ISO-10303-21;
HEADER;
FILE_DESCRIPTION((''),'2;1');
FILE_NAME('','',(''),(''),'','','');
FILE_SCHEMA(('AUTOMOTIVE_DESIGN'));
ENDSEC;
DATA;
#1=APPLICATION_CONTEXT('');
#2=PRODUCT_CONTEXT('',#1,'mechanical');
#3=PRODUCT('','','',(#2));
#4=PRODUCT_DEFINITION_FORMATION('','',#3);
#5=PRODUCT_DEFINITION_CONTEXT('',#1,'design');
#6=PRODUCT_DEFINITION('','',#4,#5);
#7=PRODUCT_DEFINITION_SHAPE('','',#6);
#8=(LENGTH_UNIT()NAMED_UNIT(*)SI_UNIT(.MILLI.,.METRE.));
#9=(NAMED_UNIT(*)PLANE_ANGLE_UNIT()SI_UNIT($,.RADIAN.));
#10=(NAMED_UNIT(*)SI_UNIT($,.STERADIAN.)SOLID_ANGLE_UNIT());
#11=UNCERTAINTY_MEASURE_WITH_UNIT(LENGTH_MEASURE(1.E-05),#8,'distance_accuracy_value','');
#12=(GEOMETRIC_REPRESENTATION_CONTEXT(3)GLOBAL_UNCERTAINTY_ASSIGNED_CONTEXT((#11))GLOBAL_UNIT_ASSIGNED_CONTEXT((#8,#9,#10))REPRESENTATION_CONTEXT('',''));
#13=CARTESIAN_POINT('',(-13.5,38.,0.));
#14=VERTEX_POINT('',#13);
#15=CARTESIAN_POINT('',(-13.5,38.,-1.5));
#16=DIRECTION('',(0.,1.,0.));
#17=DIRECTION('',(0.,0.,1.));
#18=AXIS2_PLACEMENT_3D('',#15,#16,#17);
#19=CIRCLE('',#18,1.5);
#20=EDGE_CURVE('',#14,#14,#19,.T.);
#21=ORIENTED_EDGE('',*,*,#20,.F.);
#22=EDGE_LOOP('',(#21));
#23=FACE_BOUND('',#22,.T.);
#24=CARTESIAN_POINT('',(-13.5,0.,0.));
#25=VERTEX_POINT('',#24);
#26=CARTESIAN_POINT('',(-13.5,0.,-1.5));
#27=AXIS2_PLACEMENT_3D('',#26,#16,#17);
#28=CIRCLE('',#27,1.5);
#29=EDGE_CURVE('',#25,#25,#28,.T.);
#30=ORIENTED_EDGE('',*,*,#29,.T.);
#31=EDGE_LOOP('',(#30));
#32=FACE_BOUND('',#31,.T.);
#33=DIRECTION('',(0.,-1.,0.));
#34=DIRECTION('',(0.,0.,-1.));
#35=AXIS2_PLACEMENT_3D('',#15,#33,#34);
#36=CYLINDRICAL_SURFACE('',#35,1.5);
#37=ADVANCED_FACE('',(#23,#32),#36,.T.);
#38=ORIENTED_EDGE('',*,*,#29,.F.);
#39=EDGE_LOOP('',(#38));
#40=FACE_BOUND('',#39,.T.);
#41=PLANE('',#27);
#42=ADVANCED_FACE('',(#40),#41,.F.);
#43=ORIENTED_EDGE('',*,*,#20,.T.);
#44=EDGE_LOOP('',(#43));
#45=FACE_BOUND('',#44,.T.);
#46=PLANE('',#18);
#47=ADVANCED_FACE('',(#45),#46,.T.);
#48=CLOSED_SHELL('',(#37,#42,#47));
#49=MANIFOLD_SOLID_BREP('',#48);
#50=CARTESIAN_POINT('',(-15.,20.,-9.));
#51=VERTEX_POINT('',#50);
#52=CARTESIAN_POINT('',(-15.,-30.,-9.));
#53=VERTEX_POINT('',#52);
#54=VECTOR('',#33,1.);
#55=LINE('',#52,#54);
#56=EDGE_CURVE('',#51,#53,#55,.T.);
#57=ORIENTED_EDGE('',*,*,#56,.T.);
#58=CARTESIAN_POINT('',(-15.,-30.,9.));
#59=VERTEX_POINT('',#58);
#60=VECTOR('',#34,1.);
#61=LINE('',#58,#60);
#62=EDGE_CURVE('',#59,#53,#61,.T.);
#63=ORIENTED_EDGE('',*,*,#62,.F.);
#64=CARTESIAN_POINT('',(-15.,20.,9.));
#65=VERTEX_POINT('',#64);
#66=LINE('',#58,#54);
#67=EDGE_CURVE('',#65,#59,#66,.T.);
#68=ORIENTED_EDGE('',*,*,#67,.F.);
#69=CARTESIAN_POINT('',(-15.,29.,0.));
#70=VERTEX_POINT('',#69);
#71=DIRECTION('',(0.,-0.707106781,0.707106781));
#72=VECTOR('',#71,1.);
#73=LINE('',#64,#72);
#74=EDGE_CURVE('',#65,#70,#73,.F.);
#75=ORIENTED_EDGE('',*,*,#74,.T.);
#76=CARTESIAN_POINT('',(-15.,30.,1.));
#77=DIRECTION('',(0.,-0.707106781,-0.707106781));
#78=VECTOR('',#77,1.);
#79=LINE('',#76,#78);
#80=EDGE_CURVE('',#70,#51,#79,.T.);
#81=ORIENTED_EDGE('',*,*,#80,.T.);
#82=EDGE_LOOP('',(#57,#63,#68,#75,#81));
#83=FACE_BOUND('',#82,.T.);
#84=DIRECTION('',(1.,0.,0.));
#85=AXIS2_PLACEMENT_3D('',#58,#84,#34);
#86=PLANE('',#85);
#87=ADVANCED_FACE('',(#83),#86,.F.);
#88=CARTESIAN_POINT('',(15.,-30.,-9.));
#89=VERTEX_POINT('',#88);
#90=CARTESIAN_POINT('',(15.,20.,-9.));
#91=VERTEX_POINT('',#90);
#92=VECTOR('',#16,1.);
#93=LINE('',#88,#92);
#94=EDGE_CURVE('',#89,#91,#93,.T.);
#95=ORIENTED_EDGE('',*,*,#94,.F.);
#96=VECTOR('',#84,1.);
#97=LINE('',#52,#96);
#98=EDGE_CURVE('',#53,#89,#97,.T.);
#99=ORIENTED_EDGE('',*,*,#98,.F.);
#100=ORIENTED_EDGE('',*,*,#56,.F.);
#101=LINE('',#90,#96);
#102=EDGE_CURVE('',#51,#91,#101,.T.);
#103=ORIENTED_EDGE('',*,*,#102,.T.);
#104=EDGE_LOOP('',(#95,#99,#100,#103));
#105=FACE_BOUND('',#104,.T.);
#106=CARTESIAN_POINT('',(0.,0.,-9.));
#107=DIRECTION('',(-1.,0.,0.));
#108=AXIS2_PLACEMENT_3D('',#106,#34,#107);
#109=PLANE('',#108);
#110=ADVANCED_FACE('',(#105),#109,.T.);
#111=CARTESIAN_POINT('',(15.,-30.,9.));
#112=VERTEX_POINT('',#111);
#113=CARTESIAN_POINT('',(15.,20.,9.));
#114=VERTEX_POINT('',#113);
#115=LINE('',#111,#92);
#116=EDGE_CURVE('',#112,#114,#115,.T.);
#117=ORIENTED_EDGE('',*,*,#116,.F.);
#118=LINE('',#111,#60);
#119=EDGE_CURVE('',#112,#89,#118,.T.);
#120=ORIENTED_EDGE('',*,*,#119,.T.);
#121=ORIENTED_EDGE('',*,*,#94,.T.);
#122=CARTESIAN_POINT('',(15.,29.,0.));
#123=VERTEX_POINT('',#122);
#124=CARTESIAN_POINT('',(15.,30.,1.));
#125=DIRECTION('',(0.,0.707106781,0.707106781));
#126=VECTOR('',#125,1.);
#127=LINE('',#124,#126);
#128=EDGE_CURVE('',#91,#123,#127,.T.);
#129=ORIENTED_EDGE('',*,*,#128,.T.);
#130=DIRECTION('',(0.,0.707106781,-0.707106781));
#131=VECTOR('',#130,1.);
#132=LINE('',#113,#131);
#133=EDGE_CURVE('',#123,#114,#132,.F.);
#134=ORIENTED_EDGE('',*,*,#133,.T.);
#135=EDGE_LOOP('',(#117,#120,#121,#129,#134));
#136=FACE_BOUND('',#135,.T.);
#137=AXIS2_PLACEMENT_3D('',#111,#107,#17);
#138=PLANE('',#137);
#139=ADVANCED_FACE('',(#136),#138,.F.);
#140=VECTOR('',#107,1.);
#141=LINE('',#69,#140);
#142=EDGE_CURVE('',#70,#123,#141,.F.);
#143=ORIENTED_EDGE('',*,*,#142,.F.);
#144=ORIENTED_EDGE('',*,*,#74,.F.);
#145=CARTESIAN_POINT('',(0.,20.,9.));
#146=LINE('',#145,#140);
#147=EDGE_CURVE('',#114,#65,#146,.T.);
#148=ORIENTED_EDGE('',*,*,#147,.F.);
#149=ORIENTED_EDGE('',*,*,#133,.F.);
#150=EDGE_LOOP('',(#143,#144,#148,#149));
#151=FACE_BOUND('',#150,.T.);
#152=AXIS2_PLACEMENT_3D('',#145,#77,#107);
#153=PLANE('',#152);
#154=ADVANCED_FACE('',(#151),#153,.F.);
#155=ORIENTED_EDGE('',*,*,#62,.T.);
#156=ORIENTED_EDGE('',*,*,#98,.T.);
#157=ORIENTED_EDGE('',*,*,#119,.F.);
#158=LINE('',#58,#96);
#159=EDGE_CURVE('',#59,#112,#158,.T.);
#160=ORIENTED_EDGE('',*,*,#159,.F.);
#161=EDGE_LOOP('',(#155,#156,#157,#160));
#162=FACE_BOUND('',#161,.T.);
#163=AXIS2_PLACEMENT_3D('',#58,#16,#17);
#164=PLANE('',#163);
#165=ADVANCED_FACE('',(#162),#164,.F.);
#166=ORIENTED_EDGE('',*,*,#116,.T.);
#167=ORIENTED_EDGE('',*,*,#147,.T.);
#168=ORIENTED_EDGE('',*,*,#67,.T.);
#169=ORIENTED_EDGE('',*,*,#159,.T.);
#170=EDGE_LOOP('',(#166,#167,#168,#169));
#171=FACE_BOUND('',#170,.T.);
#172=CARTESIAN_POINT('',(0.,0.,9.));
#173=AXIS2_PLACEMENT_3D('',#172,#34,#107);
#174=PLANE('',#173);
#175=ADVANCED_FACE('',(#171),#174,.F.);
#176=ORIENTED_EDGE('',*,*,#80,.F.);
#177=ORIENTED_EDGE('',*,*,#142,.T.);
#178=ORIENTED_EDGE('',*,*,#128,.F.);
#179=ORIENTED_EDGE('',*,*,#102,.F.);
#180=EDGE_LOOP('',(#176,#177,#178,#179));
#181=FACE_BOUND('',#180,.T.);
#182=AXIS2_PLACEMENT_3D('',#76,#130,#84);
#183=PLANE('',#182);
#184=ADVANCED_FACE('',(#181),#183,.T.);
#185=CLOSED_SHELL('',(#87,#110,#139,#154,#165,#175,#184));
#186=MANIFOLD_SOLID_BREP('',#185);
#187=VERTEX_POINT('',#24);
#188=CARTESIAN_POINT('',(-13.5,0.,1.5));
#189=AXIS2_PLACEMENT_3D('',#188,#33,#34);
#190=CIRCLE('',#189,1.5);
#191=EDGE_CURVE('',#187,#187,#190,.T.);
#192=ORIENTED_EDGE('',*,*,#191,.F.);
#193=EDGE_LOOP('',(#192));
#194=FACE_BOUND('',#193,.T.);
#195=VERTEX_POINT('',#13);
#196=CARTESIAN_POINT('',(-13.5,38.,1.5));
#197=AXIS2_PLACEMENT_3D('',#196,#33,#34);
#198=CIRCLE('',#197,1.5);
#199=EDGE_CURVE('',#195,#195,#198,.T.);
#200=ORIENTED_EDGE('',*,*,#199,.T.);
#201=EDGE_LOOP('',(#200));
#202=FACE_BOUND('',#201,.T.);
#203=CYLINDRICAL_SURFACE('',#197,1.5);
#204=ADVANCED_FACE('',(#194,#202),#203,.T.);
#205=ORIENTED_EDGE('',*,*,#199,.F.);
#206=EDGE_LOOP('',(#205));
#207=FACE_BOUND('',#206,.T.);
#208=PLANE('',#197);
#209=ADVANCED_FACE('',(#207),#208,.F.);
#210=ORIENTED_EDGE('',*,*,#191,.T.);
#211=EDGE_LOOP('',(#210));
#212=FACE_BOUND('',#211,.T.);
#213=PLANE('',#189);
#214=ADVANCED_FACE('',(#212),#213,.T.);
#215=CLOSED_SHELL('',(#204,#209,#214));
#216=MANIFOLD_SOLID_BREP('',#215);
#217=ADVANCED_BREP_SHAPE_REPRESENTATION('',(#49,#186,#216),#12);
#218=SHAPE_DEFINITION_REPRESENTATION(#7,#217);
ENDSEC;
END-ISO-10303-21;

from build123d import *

# Parameters (mm, degrees)
CROQUIS1_W                = 30
CROQUIS1_H                = 60
SALIENTE_EXTRUIR1_DEPTH   = 9
CHAFL_N1_SIZE             = 10
CROQUIS2_R                = 1.5
SALIENTE_EXTRUIR4_DEPTH   = 38
SALIENTE_EXTRUIR4_2_DEPTH = 38


with BuildPart() as part:
    # Croquis1 → Saliente-Extruir1 (new, symmetric)
    with BuildSketch(Plane.XY):
        Rectangle(CROQUIS1_W, CROQUIS1_H)
    extrude(amount=SALIENTE_EXTRUIR1_DEPTH, both=True)

    # Chaflán1
    # the kernel refuses this chamfer: 10 mm, written as the material it takes off along each edge
    with BuildSketch(Plane(origin=(40.71682988, 30, -9), x_dir=(0, 0.027495876610586317, 0.9996219169112968), z_dir=(-1, 0, 0))) as chafl_n1_piece_1:
        Polygon((CHAFL_N1_SIZE * 0.999621916911, -CHAFL_N1_SIZE * 0.0274958766106), (-CHAFL_N1_SIZE * 0.0274958766106, -CHAFL_N1_SIZE * 0.999621916911), (0, 0), align=None)
    extrude(amount=81.433659759, mode=Mode.SUBTRACT)
    with BuildSketch(Plane(origin=(40.71682988, 30, 9), x_dir=(0, 0.027495876610586317, -0.9996219169112968), z_dir=(-1, 0, 0))) as chafl_n1_piece_2:
        Polygon((CHAFL_N1_SIZE * 0.999621916911, CHAFL_N1_SIZE * 0.0274958766106), (-CHAFL_N1_SIZE * 0.0274958766106, CHAFL_N1_SIZE * 0.999621916911), (0, 0), align=None)
    extrude(amount=81.433659759, mode=Mode.SUBTRACT)


with BuildPart() as body_2:
    # Croquis2 → Saliente-Extruir4 (new body)
    with BuildSketch(Plane(origin=(0, 0, 0), x_dir=(1, 0, 0), z_dir=(0, 1, 0))):
        with Locations(Location((-13.5, 1.5, 0), (0, 0, 270))):
            Circle(CROQUIS2_R)
    extrude(amount=SALIENTE_EXTRUIR4_DEPTH)


with BuildPart() as body_3:
    # Croquis2 → Saliente-Extruir4 2 (new body)
    with BuildSketch(Plane(origin=(0, 0, 0), x_dir=(1, 0, 0), z_dir=(0, 1, 0))):
        with Locations(Location((-13.5, -1.5, 0), (0, 0, 90))):
            Circle(CROQUIS2_R)
    extrude(amount=SALIENTE_EXTRUIR4_2_DEPTH)


solid = Compound([part.part, body_2.part, body_3.part])
